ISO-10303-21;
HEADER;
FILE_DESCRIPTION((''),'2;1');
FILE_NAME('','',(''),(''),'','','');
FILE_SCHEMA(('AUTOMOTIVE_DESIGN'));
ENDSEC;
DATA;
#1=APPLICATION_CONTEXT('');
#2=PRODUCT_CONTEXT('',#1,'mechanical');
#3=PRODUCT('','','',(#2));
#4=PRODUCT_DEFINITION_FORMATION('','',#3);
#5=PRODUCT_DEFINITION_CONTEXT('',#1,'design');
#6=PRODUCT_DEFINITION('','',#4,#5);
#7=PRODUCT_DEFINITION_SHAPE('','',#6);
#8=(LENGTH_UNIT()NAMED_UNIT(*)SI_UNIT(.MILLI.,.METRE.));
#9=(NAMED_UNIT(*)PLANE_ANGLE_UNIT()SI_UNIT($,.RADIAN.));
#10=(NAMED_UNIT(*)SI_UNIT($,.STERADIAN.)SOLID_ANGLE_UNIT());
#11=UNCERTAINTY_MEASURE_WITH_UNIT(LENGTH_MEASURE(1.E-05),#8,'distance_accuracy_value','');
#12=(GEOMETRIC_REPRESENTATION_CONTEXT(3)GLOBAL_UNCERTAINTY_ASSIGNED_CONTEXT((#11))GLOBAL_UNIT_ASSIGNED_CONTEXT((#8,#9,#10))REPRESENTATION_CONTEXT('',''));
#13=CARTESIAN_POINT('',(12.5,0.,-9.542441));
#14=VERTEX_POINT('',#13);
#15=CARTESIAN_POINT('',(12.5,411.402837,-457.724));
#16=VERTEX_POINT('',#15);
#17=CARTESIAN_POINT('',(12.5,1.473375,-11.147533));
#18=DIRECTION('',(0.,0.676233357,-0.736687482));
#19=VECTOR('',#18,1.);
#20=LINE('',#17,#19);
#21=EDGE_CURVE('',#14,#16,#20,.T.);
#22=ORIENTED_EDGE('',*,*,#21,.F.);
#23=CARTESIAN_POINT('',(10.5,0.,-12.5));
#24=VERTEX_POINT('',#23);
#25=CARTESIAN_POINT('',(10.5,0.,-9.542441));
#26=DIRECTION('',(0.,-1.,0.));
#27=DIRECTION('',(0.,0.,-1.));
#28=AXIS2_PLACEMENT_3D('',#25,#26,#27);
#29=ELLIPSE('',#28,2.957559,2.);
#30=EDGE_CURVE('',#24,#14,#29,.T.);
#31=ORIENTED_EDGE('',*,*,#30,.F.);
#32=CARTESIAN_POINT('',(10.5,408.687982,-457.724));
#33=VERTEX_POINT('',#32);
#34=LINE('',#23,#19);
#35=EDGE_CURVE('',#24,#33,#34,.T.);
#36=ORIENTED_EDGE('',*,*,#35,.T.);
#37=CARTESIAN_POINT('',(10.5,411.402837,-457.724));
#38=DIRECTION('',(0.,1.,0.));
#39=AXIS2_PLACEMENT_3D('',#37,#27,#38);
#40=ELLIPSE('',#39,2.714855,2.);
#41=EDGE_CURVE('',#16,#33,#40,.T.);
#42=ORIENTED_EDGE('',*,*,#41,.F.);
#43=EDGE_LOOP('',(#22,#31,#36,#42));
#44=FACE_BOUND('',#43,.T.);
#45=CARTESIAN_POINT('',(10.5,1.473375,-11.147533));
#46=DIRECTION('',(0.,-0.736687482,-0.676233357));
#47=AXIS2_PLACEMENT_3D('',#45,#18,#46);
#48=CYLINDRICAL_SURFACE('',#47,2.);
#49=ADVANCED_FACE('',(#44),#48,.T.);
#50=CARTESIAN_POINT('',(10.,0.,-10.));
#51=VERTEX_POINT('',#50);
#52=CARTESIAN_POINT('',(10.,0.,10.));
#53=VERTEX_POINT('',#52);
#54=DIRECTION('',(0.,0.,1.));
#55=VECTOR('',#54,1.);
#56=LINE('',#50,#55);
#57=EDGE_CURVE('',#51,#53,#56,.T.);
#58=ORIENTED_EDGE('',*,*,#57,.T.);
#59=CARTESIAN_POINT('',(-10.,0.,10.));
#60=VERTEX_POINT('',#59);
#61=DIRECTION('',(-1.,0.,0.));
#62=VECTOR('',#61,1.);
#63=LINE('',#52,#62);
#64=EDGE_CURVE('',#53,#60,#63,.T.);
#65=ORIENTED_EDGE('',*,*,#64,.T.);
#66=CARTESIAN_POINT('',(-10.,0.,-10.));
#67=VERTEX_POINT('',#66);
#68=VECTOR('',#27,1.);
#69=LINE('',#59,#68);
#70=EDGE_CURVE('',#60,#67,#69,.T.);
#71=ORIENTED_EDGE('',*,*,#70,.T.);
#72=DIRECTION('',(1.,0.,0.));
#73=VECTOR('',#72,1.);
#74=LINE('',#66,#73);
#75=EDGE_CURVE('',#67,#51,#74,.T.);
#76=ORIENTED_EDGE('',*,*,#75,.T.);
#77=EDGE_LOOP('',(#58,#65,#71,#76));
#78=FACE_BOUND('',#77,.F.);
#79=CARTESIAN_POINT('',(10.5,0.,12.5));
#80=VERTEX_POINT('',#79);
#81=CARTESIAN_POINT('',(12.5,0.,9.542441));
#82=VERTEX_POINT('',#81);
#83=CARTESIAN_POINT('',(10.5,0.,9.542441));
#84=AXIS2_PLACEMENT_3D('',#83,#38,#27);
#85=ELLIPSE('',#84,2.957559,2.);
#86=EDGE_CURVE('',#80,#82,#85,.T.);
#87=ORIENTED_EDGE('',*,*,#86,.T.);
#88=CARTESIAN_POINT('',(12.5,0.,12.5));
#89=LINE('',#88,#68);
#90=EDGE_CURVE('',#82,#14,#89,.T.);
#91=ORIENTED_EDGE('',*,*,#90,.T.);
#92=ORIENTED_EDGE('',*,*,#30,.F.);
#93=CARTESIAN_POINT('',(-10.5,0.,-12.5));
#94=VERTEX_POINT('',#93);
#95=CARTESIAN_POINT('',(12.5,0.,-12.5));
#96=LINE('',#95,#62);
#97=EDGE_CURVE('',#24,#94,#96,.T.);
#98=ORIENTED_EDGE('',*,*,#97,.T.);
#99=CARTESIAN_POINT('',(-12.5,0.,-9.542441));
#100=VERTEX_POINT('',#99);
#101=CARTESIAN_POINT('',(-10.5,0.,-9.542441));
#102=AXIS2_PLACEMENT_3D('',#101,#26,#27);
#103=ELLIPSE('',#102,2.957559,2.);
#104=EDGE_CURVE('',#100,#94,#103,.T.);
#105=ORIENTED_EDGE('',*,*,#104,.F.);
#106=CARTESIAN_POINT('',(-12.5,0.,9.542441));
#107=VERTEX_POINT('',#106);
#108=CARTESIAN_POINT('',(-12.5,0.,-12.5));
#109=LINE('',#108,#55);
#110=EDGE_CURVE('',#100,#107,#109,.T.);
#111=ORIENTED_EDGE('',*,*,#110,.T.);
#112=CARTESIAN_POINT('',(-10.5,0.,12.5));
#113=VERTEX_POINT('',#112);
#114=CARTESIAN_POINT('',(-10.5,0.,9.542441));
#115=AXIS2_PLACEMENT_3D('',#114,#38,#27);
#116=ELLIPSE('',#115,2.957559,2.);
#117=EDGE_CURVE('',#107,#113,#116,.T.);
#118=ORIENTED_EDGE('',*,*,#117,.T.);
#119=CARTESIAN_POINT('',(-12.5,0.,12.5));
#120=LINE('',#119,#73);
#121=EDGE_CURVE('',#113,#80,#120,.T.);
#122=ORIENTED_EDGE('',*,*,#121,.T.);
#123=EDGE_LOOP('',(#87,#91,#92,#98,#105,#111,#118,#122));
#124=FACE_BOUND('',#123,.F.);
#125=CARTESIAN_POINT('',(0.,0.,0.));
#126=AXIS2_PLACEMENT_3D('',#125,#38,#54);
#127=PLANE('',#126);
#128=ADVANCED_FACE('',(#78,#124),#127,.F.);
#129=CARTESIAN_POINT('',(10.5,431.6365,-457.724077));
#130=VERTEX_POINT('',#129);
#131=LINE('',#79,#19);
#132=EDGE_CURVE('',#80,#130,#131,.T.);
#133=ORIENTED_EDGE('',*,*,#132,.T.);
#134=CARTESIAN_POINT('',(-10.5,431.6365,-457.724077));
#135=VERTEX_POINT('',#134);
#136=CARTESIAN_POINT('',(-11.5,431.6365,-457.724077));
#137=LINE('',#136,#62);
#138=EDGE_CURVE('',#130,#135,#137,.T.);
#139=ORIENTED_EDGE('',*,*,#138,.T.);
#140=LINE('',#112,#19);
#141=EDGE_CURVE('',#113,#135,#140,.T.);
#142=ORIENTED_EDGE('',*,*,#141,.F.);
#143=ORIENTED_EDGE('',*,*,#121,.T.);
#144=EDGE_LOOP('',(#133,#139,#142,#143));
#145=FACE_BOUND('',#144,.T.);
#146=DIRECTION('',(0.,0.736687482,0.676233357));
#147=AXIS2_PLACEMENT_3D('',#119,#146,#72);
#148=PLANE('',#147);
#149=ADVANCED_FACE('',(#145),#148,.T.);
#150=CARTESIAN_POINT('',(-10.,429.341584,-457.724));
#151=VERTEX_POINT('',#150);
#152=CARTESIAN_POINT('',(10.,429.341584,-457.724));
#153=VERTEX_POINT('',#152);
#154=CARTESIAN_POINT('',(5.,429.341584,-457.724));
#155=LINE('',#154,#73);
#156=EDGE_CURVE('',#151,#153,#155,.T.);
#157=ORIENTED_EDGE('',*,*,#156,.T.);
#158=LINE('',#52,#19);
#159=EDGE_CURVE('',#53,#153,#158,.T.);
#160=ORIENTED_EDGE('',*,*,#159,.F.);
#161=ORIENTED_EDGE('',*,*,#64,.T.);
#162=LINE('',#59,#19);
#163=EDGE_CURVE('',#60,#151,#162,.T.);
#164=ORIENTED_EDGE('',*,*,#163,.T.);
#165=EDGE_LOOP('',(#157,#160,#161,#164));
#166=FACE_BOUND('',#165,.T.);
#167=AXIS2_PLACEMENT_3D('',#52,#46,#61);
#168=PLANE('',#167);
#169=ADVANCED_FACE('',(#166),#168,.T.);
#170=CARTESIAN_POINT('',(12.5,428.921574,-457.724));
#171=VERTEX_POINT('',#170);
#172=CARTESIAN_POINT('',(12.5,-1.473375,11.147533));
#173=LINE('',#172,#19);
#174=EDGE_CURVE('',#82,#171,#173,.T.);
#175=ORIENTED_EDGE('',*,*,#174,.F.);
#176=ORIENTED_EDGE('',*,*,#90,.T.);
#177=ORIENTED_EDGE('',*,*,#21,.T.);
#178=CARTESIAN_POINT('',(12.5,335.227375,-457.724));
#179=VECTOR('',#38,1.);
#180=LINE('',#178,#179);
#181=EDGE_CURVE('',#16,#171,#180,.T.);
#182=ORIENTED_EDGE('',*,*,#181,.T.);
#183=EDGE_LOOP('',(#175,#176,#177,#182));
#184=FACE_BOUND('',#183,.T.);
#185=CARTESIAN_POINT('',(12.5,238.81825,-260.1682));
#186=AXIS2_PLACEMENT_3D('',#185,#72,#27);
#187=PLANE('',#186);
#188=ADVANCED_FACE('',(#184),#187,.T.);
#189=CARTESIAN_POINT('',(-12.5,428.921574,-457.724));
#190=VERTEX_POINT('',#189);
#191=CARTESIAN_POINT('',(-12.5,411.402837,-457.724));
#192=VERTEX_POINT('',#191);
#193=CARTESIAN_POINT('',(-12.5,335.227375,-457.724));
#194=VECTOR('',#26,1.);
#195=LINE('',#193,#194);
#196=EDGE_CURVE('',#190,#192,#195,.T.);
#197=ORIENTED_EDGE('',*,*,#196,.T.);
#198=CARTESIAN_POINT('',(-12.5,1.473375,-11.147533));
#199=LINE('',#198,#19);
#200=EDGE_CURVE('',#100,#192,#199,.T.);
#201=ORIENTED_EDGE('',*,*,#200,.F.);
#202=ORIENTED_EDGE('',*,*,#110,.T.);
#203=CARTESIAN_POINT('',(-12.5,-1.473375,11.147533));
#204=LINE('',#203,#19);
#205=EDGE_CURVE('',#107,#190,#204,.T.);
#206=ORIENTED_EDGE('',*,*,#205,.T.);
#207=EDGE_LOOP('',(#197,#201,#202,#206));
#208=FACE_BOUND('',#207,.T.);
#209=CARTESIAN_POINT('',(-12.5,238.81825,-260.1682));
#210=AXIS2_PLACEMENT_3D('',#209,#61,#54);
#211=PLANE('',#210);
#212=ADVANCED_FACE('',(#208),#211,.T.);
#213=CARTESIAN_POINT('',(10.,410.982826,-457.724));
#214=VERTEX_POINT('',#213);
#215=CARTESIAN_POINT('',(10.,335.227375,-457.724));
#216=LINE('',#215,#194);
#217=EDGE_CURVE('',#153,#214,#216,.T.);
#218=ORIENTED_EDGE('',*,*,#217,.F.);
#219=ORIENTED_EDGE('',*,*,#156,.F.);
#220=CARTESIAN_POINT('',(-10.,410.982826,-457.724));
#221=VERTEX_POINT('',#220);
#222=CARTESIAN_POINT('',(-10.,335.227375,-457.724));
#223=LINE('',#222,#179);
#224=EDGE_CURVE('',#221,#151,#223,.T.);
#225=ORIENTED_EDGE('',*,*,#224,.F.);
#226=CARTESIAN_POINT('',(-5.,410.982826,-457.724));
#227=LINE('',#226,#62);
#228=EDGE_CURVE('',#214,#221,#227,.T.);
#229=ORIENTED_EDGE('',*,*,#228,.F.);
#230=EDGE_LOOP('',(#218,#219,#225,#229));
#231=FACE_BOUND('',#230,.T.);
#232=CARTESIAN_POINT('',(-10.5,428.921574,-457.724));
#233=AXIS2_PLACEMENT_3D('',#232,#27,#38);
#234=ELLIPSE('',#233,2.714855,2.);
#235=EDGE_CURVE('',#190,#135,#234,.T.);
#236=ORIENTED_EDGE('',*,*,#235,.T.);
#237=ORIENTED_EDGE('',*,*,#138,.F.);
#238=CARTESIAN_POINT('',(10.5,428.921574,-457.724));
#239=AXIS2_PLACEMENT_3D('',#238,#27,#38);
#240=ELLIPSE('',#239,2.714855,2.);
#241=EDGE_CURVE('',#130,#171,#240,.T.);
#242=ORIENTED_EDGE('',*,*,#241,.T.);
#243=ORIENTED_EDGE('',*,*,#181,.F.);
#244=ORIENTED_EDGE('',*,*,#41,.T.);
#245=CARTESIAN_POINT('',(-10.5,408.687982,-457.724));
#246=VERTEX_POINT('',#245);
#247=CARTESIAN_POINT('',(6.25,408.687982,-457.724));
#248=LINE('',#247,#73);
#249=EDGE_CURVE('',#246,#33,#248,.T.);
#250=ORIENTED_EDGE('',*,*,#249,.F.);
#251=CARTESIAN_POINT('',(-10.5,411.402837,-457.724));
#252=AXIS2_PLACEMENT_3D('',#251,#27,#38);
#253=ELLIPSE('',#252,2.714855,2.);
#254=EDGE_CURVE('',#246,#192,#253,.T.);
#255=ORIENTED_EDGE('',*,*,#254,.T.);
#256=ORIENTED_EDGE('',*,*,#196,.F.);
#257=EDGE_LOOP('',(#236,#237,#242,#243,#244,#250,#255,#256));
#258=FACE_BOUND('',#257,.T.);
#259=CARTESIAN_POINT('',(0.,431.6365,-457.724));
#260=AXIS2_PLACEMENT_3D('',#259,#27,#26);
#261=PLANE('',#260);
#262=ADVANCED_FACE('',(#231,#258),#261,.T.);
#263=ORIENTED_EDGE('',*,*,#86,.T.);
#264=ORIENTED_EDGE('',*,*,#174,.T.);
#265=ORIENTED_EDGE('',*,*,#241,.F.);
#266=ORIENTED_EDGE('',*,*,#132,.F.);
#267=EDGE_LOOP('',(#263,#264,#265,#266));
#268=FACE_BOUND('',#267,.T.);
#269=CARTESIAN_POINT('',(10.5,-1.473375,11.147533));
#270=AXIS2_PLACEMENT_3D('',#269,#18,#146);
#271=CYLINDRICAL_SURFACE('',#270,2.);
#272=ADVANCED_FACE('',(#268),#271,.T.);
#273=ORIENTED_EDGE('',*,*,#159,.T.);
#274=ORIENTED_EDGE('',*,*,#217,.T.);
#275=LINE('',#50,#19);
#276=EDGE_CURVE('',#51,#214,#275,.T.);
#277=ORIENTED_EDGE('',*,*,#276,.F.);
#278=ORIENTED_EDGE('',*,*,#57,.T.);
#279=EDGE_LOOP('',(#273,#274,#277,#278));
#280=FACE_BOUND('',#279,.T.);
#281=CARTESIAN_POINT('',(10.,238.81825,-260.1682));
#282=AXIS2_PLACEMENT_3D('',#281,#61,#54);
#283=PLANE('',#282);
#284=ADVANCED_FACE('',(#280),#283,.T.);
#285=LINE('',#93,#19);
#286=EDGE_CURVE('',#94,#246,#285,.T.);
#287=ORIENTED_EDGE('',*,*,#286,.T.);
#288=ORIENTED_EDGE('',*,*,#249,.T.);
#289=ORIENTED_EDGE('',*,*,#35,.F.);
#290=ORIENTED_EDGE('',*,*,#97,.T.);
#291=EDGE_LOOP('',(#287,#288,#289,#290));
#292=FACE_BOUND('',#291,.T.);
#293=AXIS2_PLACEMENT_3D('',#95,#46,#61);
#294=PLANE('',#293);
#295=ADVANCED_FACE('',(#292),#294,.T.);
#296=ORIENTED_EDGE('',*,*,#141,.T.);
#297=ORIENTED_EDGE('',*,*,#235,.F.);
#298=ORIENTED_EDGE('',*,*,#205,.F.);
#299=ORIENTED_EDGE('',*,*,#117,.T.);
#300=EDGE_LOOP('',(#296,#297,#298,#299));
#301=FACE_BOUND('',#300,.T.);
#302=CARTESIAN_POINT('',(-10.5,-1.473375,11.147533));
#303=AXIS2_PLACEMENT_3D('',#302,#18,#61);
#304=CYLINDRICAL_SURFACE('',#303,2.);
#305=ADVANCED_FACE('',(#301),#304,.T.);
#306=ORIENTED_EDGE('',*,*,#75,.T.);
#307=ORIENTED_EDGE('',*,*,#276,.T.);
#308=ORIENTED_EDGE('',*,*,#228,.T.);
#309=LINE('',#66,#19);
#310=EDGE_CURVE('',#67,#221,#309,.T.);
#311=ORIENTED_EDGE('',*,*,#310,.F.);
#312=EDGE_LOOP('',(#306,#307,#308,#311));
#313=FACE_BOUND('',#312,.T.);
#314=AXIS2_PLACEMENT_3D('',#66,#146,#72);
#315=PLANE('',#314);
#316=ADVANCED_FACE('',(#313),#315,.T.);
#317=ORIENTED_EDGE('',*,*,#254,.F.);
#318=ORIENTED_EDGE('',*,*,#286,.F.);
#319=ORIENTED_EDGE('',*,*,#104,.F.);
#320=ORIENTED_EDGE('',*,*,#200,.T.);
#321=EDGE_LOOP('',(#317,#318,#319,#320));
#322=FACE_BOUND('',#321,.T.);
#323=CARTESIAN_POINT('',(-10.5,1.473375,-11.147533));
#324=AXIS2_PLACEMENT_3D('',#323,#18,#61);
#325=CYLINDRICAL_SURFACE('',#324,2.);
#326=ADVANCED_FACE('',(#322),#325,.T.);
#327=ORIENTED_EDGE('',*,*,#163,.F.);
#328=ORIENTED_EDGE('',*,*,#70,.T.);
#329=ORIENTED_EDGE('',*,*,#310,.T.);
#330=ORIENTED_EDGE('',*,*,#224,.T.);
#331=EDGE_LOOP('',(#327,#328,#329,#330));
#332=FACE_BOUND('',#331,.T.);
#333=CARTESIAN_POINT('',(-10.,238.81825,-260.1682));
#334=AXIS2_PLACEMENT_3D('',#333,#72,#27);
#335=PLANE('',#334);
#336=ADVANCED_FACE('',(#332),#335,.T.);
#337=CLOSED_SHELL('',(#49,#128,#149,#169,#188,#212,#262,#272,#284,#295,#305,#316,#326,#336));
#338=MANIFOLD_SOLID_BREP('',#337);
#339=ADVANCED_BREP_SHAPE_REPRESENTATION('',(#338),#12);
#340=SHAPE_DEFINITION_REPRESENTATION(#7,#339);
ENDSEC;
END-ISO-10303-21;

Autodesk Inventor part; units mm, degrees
ref_plane "YZ Plane" through (0, 0, 0) normal (1, 0, 0) x (0, 1, 0)
sketch "profile" plane through (0, 0, 0) normal (0, 1, 0) x (-1, 0, 0)
  line L0 (12.5, 12.5) -> (-12.5, 12.5)
  line L1 (-12.5, 12.5) -> (-12.5, -12.5)
  line L2 (-12.5, -12.5) -> (12.5, -12.5)
  line L3 (12.5, -12.5) -> (12.5, 12.5)
  line L4 (-10, -10) -> (-10, 10)
  line L5 (-10, 10) -> (10, 10)
  line L6 (10, 10) -> (10, -10)
  line L7 (10, -10) -> (-10, -10)
  point P0 (0, 0)
  dimension "d0" = 12.5
  dimension "d1" = 25
  dimension "d2" = 25
  dimension "d3" = 12.5
  dimension "d6" = 2.5
sketch3d "3D Sketch1"
  line L0 (0, 0, 0) -> (0, 477.6365, -520.3364)
  dimension "d4" = 706.319
  dimension "d5" = 42.55
sweep "Sweep1" add profiles "profile" path "3D Sketch1"
fillet "Fillet1" radius 2 4 edges at (-12.5, 238.8182, -272.6682) (-12.5, 238.8182, -247.6682) (12.5, 238.8182, -247.6682) (12.5, 238.8182, -272.6682)
ref_plane "Work Plane2" through (-10.5, 431.6365, -532.8364) normal (0, 1, 0) x (1, 0, 0)
split "Split2" plane through (-10.5, 431.6365, -532.8364) removes the side toward (0, 1, 0)
ref_plane "Work Plane3" through (0, 431.6365, -457.724) normal (0, 0, 1) x (1, 0, 0)
split "Split3" plane through (0, 431.6365, -457.724) removes the side toward (0, 0, -1)
equation "\"d0\" = 0.5 * d1"
equation "\"d1\" = width"
equation "\"d2\" = d1"
equation "\"d3\" = 0.5 * d2"
equation "\"d6\" = t"
equation "\"d4\" = L"
equation "\"d5\" = angle"
equation "\"d9\" = filletRadius"
equation "\"L\" = 706.319"
equation "\"t\" = 2.5"
equation "\"filletRadius\" = 2"
equation "\"angle\" = 42.55deg"
equation "\"width\" = 25"
properties part number "support_truss2" material "Steel, Galvanized"
